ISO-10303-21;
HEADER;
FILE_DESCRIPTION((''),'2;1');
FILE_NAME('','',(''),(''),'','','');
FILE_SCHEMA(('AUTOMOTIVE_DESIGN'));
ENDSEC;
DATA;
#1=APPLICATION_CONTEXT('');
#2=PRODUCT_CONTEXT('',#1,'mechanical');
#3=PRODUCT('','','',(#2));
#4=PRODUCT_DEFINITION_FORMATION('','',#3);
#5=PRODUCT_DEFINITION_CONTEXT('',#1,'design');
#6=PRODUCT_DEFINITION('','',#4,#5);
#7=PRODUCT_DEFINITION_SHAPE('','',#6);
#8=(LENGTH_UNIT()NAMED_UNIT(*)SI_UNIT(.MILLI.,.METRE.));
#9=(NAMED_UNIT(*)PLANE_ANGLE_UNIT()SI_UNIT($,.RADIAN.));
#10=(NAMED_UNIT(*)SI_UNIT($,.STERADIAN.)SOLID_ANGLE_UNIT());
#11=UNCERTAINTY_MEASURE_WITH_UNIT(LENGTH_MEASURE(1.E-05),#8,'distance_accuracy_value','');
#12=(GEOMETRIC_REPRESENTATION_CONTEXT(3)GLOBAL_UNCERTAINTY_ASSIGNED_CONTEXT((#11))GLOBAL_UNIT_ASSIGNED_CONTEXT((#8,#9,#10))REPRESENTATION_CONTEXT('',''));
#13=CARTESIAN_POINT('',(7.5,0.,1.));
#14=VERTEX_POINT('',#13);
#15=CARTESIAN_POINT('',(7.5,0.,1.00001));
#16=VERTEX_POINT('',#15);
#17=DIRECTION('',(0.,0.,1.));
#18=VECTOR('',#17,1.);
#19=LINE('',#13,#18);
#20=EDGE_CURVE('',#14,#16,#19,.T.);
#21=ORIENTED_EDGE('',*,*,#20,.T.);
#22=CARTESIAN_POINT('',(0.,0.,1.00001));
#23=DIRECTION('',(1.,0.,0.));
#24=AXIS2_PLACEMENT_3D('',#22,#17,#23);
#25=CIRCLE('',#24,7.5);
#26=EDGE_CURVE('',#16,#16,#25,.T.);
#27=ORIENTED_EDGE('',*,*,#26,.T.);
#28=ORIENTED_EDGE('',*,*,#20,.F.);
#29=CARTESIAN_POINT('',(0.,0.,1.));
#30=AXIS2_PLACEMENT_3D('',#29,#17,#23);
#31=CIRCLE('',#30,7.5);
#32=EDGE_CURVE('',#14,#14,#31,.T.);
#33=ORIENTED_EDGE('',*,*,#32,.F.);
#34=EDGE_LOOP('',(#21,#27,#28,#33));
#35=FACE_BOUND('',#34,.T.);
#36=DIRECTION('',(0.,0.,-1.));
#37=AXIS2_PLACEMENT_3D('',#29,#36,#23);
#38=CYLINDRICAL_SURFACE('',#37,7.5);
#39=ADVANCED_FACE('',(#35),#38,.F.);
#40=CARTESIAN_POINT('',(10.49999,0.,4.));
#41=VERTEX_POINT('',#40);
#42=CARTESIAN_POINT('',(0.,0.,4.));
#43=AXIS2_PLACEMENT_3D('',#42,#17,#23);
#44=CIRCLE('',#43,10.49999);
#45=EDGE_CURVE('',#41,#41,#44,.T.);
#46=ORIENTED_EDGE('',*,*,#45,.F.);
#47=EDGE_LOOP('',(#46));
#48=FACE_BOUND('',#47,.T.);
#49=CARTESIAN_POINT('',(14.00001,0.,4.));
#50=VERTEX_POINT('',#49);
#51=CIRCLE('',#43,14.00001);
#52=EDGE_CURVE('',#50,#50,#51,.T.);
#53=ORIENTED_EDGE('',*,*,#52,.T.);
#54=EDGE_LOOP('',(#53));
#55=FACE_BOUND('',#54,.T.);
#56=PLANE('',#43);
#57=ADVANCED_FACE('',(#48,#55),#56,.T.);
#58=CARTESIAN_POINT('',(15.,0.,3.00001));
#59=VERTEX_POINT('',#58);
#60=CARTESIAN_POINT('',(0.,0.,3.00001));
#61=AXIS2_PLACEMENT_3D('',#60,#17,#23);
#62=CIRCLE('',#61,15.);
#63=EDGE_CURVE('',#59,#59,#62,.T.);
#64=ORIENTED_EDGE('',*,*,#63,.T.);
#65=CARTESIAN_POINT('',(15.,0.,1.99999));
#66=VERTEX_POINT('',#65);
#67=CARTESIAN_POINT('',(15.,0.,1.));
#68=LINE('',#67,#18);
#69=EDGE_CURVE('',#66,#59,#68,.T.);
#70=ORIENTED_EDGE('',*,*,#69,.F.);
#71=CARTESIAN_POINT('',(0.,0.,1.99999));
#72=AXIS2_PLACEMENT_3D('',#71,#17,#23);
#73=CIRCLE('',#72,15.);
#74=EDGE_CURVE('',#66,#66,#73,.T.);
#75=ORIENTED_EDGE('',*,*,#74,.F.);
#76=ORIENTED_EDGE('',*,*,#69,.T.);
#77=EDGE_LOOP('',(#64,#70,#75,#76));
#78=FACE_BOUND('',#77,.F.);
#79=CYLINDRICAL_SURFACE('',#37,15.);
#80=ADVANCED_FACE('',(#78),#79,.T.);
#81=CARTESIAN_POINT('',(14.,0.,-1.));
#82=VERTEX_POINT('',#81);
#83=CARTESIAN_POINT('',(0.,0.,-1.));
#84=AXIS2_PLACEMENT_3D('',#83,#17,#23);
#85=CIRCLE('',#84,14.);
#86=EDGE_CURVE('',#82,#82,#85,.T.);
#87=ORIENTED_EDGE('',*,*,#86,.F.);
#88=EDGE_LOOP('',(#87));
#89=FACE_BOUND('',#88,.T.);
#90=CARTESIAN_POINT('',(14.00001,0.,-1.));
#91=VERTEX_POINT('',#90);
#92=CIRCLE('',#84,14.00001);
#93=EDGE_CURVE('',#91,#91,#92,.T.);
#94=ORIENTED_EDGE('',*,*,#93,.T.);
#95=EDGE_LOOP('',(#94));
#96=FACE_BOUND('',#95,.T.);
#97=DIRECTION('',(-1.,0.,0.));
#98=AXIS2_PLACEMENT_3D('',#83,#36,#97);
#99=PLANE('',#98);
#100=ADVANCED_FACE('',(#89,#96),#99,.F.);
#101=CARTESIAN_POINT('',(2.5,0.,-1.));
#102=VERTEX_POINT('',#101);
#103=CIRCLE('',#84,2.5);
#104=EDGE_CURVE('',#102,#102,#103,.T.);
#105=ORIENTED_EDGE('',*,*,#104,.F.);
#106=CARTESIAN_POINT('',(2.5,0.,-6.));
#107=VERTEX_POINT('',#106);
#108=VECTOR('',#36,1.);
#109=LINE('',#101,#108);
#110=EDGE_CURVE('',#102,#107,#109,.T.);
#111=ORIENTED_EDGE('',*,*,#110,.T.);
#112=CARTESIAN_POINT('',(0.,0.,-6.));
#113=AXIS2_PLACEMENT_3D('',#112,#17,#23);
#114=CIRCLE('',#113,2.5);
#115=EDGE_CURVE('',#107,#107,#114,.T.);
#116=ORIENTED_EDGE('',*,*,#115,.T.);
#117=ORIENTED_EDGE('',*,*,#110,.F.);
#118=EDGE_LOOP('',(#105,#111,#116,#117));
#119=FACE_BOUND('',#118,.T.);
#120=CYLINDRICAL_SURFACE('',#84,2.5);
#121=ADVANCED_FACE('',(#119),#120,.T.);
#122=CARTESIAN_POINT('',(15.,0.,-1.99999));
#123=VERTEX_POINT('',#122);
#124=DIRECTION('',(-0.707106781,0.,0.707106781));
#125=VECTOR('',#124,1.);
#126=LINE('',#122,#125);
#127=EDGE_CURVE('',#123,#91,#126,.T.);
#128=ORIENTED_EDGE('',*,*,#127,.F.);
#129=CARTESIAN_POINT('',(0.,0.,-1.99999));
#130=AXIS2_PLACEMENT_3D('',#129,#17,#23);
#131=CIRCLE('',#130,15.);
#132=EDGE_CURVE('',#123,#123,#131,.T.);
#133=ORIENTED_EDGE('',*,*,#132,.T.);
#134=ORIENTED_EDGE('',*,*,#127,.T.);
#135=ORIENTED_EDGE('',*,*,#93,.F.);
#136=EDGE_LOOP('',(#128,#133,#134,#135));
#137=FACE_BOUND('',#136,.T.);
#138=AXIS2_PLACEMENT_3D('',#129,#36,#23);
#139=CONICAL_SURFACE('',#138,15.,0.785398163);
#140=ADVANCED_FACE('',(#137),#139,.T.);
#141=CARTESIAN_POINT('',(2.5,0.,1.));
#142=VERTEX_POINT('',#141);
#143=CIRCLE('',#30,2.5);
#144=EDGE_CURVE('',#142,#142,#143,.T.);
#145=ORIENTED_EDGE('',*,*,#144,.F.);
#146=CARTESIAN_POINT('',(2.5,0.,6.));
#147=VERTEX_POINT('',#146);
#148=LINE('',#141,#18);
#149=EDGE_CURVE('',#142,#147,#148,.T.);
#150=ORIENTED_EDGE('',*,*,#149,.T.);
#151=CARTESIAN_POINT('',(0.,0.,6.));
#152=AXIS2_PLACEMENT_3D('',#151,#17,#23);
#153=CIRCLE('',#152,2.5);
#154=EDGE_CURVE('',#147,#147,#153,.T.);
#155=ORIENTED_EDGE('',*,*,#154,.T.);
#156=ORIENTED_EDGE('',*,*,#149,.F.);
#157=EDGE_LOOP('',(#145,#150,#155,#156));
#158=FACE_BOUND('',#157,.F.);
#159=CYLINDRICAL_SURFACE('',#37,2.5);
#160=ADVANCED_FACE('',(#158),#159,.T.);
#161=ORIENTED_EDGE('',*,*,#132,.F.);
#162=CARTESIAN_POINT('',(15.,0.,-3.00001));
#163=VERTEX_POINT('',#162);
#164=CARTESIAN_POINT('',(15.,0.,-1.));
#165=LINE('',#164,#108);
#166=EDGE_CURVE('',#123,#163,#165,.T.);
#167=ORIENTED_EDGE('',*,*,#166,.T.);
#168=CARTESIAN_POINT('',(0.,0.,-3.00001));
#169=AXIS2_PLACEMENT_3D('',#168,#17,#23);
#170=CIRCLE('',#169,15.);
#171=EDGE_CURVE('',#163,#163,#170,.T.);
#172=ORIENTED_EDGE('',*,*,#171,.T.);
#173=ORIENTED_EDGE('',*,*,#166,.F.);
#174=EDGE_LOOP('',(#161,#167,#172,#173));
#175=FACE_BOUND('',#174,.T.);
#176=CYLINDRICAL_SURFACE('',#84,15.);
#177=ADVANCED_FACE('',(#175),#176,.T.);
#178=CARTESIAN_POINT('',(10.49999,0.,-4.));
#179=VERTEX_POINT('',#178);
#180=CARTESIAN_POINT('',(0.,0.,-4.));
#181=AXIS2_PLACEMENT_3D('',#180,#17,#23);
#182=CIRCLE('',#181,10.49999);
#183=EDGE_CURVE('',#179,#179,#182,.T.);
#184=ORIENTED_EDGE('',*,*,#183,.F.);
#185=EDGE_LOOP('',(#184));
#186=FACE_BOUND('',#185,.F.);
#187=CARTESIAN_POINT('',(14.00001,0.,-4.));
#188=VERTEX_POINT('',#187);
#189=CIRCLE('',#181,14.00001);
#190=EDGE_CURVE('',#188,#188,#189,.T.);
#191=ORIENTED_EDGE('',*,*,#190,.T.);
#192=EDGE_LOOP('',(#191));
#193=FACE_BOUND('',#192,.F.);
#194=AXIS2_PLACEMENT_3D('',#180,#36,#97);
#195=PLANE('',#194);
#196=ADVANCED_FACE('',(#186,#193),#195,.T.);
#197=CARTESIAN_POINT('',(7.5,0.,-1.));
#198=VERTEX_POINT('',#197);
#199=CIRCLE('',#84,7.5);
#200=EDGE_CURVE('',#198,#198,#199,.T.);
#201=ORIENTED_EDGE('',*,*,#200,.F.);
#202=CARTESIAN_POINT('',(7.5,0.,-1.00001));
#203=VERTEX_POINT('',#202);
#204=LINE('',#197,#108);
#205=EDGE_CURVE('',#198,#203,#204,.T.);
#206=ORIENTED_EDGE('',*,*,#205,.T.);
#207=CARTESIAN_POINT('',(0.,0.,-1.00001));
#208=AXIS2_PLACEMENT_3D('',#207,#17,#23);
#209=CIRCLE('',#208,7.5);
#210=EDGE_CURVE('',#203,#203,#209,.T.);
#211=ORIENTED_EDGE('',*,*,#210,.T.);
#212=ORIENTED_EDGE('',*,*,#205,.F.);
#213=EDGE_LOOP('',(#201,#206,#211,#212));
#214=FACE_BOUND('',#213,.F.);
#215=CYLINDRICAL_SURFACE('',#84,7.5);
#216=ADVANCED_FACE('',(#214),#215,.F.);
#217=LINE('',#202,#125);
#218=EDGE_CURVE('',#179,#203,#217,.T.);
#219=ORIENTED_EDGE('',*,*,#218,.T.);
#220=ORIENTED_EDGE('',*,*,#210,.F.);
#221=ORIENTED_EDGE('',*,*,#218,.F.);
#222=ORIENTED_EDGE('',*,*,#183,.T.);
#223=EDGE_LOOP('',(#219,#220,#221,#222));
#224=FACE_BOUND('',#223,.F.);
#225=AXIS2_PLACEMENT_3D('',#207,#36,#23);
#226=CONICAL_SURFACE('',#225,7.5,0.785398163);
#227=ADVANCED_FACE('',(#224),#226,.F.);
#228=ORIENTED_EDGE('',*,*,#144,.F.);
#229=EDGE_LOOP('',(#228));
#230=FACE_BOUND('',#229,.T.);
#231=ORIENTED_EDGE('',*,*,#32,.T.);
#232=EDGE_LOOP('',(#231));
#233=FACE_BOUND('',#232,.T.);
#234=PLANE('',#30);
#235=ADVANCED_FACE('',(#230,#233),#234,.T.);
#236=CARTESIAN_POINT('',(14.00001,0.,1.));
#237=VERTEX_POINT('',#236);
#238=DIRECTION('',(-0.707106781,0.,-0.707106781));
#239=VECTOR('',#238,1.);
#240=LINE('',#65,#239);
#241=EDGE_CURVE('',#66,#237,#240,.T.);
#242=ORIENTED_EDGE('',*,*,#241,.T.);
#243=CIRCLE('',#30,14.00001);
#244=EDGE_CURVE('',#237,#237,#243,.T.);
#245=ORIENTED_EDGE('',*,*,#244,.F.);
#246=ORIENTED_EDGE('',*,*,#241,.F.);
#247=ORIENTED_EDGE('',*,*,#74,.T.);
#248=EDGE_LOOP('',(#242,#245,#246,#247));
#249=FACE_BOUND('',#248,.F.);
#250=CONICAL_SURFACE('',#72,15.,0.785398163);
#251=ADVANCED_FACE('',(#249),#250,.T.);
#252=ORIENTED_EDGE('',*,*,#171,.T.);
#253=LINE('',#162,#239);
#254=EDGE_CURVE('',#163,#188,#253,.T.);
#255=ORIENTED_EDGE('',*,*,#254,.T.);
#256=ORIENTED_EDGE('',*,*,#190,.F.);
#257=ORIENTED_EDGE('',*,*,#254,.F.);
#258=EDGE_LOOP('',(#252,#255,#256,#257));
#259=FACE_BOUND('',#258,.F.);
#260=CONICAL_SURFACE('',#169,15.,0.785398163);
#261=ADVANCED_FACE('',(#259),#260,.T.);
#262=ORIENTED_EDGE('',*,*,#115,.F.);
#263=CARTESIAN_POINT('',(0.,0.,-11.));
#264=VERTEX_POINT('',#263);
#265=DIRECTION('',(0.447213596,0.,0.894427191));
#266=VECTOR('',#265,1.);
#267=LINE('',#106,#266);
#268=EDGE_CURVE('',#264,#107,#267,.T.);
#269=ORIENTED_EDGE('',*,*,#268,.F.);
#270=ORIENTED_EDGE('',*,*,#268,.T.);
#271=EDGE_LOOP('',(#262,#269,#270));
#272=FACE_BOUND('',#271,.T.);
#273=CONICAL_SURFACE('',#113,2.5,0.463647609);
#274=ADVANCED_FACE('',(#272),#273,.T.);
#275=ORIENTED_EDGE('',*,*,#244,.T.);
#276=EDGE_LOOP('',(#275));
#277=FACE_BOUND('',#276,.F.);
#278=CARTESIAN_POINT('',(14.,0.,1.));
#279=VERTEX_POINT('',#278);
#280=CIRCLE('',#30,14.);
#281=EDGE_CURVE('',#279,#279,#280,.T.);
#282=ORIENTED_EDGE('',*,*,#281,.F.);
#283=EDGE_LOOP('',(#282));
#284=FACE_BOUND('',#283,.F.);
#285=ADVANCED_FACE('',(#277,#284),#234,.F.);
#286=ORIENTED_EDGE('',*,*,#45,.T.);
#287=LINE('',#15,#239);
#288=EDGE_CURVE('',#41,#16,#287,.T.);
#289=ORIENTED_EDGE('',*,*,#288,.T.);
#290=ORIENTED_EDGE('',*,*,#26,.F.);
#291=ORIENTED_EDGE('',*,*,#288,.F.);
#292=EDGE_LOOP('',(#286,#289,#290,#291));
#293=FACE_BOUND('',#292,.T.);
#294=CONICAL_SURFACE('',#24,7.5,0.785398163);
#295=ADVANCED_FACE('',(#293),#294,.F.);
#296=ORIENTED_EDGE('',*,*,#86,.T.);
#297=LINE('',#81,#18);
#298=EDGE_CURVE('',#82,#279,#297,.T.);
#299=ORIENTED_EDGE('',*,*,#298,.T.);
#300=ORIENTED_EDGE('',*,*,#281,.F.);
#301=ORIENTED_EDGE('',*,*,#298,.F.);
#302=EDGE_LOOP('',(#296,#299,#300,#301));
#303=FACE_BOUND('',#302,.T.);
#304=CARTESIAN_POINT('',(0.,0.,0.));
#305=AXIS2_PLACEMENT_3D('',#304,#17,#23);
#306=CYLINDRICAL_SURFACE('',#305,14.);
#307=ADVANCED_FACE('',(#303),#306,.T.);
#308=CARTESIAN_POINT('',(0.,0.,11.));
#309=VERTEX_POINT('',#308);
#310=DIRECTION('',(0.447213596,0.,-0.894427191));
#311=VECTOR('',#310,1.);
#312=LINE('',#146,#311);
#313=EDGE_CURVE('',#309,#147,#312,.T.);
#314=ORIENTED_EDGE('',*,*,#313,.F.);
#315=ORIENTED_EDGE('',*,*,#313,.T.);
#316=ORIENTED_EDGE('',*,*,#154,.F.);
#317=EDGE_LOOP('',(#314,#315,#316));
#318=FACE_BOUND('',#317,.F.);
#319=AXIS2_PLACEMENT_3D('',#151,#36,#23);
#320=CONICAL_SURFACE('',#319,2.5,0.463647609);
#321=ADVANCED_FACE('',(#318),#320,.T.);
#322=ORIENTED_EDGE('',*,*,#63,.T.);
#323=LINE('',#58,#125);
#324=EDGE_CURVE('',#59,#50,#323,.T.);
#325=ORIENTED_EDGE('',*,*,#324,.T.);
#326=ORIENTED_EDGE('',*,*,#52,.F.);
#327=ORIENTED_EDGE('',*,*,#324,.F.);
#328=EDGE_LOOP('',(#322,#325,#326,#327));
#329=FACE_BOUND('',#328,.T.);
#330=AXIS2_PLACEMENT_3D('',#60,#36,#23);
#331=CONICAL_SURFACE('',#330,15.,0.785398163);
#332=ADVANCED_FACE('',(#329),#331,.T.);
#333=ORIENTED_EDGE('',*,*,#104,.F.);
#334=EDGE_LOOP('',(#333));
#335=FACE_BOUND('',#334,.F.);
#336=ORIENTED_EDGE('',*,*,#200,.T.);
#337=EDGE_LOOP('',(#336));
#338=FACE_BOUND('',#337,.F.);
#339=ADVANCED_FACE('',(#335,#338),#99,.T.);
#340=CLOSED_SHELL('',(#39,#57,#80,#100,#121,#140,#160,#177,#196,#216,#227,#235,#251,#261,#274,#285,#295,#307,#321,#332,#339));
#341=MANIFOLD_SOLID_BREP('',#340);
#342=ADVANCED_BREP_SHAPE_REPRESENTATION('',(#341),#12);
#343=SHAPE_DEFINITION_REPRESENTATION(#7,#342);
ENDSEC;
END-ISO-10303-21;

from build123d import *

# Parameters (mm, degrees)
F0_R     = 14
F1_DEPTH = 1
F2_R     = 15
F2_R_2   = 14
F2_R_3   = 7.5
F3_DEPTH = 3
F2_R_4   = 2.5
F4_DEPTH = 10
F5_SIZE  = 0.99999
F6_SIZE  = 2.99999
F7_SIZE2 = 5
F7_SIZE  = 2.5


# Not quite as in the source:
# - a fillet or chamfer is up to 0.001 mm smaller than in the source, because OpenCascade refuses the exact size


with BuildPart() as f1:
    # F0 (on Top) → F1 (new body)
    with BuildSketch(Plane.XY):
        Circle(F0_R)
    extrude(amount=F1_DEPTH)

    # F2 (on face) → F3 (join)
    with BuildSketch(Plane.XY.offset(1)):
        Circle(F2_R)
        Circle(F2_R_2, mode=Mode.SUBTRACT)
        Circle(F2_R_2)
        Circle(F2_R_3, mode=Mode.SUBTRACT)
    extrude(amount=F3_DEPTH)

    # F2 (on face) → F4 (join)
    with BuildSketch(Plane.XY.offset(1)):
        Circle(F2_R_4)
    extrude(amount=F4_DEPTH)

    # F5 (size 1 in the source; OpenCascade refuses exactly that, so slightly less here)
    f5_edges = [f1.edges().sort_by_distance(p)[0] for p in [
        (-15, 0, 4),
        (-15, 0, 1),
    ]]
    chamfer(f5_edges, length=F5_SIZE)

    # F6 (size 3 in the source; OpenCascade refuses exactly that, so slightly less here)
    f6_edges = [f1.edges().sort_by_distance(p)[0] for p in [
        (-7.5, 0, 4),
    ]]
    chamfer(f6_edges, length=F6_SIZE)

    # F7
    f7_edges = [f1.edges().sort_by_distance(p)[0] for p in [
        (-2.5, 0, 11),
    ]]
    f7_side = f1.faces().sort_by_distance((0, 0, 11))[0]
    chamfer(f7_edges, length=F7_SIZE, length2=F7_SIZE2, reference=f7_side)

    # F8: F1 across plane


with BuildPart() as f1_1:
    add(f1.part)
    add(f1.part.mirror(Plane.XY))


solid = f1_1.part
